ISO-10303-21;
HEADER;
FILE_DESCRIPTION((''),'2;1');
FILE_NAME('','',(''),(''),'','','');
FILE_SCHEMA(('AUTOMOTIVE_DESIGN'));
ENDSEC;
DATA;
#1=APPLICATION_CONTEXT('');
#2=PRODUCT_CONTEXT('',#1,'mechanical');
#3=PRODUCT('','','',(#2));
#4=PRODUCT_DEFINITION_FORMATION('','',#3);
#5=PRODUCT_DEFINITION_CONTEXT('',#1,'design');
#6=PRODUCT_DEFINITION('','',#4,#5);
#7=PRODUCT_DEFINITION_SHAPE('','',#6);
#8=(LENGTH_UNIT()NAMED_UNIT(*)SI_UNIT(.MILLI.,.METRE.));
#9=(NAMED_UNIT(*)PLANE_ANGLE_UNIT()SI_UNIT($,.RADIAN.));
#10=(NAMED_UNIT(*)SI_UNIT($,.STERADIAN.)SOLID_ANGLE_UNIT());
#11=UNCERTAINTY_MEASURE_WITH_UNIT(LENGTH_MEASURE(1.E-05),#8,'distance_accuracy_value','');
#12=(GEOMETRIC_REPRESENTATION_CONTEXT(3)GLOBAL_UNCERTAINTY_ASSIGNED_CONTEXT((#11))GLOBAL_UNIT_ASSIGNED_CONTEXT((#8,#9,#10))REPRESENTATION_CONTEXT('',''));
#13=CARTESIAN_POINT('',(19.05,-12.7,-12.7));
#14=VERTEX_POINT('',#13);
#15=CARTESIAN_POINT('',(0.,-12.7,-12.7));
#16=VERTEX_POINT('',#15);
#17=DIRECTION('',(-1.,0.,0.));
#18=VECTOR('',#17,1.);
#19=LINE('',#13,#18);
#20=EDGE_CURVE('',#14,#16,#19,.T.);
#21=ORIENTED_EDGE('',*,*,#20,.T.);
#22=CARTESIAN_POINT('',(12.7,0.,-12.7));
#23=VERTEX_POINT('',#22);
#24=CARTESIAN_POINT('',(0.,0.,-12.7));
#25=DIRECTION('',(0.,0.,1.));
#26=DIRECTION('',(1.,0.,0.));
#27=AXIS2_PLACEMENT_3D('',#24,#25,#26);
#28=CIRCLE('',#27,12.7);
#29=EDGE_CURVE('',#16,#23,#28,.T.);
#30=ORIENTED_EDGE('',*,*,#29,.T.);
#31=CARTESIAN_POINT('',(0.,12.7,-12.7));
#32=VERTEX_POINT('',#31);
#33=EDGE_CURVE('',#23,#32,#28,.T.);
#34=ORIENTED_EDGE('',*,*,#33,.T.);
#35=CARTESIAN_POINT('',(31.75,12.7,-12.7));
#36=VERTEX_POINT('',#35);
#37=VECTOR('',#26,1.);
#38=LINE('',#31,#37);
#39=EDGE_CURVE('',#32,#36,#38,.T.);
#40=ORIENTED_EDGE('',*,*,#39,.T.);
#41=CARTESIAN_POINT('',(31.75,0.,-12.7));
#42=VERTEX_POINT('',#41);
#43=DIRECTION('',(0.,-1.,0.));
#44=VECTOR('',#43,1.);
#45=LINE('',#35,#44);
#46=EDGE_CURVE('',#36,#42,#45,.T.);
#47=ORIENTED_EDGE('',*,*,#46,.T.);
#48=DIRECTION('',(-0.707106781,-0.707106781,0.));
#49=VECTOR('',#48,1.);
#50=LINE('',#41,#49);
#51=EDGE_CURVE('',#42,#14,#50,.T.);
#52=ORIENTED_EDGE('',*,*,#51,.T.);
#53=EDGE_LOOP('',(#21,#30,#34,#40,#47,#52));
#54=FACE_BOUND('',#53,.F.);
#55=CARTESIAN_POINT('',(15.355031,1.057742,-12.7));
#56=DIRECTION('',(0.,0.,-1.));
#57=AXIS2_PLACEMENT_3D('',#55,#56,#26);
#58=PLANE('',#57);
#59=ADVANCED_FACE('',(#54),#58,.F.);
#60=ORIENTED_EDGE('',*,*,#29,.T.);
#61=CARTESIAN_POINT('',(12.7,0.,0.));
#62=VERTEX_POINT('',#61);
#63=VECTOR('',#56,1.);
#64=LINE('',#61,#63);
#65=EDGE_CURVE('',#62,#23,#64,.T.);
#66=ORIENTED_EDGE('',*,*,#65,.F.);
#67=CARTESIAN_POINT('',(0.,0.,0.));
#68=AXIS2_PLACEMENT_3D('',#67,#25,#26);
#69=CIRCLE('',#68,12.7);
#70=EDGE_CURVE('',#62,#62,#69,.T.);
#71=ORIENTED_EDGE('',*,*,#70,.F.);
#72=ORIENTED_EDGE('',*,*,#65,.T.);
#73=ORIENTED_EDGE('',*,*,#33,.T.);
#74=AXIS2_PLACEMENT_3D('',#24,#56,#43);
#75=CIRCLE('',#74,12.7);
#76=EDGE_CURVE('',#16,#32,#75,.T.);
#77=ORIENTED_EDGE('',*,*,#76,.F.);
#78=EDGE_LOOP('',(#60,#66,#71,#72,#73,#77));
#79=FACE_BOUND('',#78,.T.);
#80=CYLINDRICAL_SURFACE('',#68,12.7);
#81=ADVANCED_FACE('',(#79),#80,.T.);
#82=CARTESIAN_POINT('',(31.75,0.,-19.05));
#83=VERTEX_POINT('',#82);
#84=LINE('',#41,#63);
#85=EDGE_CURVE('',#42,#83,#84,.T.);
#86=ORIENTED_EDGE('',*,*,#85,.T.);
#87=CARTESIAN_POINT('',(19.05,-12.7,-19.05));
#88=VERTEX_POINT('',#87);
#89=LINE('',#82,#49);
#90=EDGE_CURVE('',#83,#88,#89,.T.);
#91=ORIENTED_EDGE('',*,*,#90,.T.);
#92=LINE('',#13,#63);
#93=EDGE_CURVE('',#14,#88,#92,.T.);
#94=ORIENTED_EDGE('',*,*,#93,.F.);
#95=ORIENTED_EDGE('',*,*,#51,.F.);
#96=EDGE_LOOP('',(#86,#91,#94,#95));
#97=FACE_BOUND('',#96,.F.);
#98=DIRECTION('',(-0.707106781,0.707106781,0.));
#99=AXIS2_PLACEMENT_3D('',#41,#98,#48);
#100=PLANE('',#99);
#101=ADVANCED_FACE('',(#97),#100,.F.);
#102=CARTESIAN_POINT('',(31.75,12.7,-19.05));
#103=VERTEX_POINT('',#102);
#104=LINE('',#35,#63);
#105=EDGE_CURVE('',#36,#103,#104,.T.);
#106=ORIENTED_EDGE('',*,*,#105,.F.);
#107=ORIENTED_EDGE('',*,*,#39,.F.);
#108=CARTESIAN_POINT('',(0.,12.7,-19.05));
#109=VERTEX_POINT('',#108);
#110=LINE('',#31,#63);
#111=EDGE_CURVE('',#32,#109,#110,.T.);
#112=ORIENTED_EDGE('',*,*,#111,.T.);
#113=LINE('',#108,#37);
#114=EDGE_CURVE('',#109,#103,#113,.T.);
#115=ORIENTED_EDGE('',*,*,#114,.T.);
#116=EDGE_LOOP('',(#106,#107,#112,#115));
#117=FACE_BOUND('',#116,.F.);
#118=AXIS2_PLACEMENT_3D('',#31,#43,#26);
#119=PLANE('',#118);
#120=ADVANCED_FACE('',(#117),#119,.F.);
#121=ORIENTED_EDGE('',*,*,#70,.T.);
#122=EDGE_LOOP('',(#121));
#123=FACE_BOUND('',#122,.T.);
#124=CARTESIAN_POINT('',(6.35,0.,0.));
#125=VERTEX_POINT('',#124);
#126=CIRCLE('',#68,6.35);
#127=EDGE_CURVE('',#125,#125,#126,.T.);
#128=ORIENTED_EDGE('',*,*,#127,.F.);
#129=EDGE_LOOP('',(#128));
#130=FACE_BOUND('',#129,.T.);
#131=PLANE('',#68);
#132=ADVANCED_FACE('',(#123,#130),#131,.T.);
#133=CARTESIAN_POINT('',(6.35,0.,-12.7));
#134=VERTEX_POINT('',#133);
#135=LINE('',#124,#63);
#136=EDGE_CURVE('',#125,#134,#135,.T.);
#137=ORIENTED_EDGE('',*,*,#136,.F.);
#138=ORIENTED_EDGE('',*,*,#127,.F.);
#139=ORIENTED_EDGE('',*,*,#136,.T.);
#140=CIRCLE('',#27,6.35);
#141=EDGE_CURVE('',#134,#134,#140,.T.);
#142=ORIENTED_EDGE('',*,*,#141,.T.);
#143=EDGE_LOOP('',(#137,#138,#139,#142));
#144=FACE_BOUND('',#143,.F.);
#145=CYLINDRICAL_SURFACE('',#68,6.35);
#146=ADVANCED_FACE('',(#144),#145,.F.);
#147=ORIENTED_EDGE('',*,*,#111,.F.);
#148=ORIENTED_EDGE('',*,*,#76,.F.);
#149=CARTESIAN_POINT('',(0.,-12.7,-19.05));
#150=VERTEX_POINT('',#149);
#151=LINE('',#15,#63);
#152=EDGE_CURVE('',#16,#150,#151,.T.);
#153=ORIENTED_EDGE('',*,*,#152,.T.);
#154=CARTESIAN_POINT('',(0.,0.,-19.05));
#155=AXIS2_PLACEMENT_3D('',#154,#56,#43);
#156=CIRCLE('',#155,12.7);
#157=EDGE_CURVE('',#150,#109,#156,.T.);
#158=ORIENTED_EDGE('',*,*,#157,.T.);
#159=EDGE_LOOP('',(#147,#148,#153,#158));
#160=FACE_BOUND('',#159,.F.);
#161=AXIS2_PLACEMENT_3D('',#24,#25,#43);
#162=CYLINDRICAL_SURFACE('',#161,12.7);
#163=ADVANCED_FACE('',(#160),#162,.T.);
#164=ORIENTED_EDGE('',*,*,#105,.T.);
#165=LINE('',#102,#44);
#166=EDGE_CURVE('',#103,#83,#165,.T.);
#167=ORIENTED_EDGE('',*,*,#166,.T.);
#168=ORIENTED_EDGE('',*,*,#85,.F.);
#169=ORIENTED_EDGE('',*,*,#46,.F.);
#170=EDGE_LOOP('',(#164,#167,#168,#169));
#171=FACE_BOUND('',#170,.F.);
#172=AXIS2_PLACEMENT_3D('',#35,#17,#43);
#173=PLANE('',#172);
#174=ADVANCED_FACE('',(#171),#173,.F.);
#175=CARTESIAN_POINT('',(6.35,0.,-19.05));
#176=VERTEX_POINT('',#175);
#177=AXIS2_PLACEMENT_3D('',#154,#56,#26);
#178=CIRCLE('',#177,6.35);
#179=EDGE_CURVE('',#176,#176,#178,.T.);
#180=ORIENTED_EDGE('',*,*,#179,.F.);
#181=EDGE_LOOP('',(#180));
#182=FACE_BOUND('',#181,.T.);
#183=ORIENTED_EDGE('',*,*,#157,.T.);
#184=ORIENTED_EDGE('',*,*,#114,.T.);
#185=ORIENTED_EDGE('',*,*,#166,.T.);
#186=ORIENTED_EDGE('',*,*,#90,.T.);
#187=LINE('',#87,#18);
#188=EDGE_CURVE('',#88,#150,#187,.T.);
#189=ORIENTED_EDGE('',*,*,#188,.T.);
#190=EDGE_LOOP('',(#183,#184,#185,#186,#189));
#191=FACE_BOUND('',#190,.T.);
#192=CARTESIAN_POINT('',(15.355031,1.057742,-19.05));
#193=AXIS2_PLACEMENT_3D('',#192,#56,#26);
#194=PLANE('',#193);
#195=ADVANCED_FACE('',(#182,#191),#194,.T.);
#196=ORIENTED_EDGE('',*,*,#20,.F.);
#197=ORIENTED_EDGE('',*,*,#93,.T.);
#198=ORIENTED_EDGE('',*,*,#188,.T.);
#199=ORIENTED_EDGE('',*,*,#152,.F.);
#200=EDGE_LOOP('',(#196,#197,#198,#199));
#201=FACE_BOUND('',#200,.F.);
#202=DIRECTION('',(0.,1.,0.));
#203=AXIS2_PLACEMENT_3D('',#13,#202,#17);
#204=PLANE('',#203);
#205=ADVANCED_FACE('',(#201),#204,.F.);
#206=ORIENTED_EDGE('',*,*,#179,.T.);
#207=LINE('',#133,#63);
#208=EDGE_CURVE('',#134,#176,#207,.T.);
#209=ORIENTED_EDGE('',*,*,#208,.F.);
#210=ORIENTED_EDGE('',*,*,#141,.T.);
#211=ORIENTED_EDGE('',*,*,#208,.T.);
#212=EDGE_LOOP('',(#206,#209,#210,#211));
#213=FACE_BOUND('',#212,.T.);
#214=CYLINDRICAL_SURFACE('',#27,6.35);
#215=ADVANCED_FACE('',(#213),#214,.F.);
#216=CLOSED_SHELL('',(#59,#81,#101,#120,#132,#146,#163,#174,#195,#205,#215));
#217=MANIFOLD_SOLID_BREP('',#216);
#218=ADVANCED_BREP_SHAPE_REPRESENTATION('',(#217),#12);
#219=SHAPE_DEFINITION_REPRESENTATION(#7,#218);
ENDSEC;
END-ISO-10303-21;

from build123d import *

# Parameters (mm, degrees)
F0_R     = 12.7
F0_R_2   = 6.35
F1_DEPTH = 12.7
F2_R     = 6.35
F3_DEPTH = 6.35


with BuildPart() as f1:
    # F0 (on Top) → F1 (new body)
    with BuildSketch(Plane.XY):
        Circle(F0_R)
        Circle(F0_R_2, mode=Mode.SUBTRACT)
    extrude(amount=-F1_DEPTH)

    # F2 (on face) → F3 (join)
    with BuildSketch(Plane(origin=(0, 0, -12.7), x_dir=(1, 0, 0), z_dir=(0, 0, -1))):
        with BuildLine():
            Line((19.05, 12.7), (0, 12.7))
            ThreePointArc((0, 12.7), (8.9802561211, 8.9802561211), (12.7, 0))
            ThreePointArc((12.7, 0), (8.9802561211, -8.9802561211), (0, -12.7))
            Line((0, -12.7), (31.75, -12.7))
            Line((31.75, -12.7), (31.75, 0))
            Line((31.75, 0), (19.05, 12.7))
        make_face()
        with BuildLine():
            ThreePointArc((12.7, 0), (8.9802561211, 8.9802561211), (0, 12.7))
            ThreePointArc((0, 12.7), (-12.7, 0), (0, -12.7))
            ThreePointArc((0, -12.7), (8.9802561211, -8.9802561211), (12.7, 0))
        make_face()
        Circle(F2_R, mode=Mode.SUBTRACT)
    extrude(amount=F3_DEPTH)


solid = f1.part
